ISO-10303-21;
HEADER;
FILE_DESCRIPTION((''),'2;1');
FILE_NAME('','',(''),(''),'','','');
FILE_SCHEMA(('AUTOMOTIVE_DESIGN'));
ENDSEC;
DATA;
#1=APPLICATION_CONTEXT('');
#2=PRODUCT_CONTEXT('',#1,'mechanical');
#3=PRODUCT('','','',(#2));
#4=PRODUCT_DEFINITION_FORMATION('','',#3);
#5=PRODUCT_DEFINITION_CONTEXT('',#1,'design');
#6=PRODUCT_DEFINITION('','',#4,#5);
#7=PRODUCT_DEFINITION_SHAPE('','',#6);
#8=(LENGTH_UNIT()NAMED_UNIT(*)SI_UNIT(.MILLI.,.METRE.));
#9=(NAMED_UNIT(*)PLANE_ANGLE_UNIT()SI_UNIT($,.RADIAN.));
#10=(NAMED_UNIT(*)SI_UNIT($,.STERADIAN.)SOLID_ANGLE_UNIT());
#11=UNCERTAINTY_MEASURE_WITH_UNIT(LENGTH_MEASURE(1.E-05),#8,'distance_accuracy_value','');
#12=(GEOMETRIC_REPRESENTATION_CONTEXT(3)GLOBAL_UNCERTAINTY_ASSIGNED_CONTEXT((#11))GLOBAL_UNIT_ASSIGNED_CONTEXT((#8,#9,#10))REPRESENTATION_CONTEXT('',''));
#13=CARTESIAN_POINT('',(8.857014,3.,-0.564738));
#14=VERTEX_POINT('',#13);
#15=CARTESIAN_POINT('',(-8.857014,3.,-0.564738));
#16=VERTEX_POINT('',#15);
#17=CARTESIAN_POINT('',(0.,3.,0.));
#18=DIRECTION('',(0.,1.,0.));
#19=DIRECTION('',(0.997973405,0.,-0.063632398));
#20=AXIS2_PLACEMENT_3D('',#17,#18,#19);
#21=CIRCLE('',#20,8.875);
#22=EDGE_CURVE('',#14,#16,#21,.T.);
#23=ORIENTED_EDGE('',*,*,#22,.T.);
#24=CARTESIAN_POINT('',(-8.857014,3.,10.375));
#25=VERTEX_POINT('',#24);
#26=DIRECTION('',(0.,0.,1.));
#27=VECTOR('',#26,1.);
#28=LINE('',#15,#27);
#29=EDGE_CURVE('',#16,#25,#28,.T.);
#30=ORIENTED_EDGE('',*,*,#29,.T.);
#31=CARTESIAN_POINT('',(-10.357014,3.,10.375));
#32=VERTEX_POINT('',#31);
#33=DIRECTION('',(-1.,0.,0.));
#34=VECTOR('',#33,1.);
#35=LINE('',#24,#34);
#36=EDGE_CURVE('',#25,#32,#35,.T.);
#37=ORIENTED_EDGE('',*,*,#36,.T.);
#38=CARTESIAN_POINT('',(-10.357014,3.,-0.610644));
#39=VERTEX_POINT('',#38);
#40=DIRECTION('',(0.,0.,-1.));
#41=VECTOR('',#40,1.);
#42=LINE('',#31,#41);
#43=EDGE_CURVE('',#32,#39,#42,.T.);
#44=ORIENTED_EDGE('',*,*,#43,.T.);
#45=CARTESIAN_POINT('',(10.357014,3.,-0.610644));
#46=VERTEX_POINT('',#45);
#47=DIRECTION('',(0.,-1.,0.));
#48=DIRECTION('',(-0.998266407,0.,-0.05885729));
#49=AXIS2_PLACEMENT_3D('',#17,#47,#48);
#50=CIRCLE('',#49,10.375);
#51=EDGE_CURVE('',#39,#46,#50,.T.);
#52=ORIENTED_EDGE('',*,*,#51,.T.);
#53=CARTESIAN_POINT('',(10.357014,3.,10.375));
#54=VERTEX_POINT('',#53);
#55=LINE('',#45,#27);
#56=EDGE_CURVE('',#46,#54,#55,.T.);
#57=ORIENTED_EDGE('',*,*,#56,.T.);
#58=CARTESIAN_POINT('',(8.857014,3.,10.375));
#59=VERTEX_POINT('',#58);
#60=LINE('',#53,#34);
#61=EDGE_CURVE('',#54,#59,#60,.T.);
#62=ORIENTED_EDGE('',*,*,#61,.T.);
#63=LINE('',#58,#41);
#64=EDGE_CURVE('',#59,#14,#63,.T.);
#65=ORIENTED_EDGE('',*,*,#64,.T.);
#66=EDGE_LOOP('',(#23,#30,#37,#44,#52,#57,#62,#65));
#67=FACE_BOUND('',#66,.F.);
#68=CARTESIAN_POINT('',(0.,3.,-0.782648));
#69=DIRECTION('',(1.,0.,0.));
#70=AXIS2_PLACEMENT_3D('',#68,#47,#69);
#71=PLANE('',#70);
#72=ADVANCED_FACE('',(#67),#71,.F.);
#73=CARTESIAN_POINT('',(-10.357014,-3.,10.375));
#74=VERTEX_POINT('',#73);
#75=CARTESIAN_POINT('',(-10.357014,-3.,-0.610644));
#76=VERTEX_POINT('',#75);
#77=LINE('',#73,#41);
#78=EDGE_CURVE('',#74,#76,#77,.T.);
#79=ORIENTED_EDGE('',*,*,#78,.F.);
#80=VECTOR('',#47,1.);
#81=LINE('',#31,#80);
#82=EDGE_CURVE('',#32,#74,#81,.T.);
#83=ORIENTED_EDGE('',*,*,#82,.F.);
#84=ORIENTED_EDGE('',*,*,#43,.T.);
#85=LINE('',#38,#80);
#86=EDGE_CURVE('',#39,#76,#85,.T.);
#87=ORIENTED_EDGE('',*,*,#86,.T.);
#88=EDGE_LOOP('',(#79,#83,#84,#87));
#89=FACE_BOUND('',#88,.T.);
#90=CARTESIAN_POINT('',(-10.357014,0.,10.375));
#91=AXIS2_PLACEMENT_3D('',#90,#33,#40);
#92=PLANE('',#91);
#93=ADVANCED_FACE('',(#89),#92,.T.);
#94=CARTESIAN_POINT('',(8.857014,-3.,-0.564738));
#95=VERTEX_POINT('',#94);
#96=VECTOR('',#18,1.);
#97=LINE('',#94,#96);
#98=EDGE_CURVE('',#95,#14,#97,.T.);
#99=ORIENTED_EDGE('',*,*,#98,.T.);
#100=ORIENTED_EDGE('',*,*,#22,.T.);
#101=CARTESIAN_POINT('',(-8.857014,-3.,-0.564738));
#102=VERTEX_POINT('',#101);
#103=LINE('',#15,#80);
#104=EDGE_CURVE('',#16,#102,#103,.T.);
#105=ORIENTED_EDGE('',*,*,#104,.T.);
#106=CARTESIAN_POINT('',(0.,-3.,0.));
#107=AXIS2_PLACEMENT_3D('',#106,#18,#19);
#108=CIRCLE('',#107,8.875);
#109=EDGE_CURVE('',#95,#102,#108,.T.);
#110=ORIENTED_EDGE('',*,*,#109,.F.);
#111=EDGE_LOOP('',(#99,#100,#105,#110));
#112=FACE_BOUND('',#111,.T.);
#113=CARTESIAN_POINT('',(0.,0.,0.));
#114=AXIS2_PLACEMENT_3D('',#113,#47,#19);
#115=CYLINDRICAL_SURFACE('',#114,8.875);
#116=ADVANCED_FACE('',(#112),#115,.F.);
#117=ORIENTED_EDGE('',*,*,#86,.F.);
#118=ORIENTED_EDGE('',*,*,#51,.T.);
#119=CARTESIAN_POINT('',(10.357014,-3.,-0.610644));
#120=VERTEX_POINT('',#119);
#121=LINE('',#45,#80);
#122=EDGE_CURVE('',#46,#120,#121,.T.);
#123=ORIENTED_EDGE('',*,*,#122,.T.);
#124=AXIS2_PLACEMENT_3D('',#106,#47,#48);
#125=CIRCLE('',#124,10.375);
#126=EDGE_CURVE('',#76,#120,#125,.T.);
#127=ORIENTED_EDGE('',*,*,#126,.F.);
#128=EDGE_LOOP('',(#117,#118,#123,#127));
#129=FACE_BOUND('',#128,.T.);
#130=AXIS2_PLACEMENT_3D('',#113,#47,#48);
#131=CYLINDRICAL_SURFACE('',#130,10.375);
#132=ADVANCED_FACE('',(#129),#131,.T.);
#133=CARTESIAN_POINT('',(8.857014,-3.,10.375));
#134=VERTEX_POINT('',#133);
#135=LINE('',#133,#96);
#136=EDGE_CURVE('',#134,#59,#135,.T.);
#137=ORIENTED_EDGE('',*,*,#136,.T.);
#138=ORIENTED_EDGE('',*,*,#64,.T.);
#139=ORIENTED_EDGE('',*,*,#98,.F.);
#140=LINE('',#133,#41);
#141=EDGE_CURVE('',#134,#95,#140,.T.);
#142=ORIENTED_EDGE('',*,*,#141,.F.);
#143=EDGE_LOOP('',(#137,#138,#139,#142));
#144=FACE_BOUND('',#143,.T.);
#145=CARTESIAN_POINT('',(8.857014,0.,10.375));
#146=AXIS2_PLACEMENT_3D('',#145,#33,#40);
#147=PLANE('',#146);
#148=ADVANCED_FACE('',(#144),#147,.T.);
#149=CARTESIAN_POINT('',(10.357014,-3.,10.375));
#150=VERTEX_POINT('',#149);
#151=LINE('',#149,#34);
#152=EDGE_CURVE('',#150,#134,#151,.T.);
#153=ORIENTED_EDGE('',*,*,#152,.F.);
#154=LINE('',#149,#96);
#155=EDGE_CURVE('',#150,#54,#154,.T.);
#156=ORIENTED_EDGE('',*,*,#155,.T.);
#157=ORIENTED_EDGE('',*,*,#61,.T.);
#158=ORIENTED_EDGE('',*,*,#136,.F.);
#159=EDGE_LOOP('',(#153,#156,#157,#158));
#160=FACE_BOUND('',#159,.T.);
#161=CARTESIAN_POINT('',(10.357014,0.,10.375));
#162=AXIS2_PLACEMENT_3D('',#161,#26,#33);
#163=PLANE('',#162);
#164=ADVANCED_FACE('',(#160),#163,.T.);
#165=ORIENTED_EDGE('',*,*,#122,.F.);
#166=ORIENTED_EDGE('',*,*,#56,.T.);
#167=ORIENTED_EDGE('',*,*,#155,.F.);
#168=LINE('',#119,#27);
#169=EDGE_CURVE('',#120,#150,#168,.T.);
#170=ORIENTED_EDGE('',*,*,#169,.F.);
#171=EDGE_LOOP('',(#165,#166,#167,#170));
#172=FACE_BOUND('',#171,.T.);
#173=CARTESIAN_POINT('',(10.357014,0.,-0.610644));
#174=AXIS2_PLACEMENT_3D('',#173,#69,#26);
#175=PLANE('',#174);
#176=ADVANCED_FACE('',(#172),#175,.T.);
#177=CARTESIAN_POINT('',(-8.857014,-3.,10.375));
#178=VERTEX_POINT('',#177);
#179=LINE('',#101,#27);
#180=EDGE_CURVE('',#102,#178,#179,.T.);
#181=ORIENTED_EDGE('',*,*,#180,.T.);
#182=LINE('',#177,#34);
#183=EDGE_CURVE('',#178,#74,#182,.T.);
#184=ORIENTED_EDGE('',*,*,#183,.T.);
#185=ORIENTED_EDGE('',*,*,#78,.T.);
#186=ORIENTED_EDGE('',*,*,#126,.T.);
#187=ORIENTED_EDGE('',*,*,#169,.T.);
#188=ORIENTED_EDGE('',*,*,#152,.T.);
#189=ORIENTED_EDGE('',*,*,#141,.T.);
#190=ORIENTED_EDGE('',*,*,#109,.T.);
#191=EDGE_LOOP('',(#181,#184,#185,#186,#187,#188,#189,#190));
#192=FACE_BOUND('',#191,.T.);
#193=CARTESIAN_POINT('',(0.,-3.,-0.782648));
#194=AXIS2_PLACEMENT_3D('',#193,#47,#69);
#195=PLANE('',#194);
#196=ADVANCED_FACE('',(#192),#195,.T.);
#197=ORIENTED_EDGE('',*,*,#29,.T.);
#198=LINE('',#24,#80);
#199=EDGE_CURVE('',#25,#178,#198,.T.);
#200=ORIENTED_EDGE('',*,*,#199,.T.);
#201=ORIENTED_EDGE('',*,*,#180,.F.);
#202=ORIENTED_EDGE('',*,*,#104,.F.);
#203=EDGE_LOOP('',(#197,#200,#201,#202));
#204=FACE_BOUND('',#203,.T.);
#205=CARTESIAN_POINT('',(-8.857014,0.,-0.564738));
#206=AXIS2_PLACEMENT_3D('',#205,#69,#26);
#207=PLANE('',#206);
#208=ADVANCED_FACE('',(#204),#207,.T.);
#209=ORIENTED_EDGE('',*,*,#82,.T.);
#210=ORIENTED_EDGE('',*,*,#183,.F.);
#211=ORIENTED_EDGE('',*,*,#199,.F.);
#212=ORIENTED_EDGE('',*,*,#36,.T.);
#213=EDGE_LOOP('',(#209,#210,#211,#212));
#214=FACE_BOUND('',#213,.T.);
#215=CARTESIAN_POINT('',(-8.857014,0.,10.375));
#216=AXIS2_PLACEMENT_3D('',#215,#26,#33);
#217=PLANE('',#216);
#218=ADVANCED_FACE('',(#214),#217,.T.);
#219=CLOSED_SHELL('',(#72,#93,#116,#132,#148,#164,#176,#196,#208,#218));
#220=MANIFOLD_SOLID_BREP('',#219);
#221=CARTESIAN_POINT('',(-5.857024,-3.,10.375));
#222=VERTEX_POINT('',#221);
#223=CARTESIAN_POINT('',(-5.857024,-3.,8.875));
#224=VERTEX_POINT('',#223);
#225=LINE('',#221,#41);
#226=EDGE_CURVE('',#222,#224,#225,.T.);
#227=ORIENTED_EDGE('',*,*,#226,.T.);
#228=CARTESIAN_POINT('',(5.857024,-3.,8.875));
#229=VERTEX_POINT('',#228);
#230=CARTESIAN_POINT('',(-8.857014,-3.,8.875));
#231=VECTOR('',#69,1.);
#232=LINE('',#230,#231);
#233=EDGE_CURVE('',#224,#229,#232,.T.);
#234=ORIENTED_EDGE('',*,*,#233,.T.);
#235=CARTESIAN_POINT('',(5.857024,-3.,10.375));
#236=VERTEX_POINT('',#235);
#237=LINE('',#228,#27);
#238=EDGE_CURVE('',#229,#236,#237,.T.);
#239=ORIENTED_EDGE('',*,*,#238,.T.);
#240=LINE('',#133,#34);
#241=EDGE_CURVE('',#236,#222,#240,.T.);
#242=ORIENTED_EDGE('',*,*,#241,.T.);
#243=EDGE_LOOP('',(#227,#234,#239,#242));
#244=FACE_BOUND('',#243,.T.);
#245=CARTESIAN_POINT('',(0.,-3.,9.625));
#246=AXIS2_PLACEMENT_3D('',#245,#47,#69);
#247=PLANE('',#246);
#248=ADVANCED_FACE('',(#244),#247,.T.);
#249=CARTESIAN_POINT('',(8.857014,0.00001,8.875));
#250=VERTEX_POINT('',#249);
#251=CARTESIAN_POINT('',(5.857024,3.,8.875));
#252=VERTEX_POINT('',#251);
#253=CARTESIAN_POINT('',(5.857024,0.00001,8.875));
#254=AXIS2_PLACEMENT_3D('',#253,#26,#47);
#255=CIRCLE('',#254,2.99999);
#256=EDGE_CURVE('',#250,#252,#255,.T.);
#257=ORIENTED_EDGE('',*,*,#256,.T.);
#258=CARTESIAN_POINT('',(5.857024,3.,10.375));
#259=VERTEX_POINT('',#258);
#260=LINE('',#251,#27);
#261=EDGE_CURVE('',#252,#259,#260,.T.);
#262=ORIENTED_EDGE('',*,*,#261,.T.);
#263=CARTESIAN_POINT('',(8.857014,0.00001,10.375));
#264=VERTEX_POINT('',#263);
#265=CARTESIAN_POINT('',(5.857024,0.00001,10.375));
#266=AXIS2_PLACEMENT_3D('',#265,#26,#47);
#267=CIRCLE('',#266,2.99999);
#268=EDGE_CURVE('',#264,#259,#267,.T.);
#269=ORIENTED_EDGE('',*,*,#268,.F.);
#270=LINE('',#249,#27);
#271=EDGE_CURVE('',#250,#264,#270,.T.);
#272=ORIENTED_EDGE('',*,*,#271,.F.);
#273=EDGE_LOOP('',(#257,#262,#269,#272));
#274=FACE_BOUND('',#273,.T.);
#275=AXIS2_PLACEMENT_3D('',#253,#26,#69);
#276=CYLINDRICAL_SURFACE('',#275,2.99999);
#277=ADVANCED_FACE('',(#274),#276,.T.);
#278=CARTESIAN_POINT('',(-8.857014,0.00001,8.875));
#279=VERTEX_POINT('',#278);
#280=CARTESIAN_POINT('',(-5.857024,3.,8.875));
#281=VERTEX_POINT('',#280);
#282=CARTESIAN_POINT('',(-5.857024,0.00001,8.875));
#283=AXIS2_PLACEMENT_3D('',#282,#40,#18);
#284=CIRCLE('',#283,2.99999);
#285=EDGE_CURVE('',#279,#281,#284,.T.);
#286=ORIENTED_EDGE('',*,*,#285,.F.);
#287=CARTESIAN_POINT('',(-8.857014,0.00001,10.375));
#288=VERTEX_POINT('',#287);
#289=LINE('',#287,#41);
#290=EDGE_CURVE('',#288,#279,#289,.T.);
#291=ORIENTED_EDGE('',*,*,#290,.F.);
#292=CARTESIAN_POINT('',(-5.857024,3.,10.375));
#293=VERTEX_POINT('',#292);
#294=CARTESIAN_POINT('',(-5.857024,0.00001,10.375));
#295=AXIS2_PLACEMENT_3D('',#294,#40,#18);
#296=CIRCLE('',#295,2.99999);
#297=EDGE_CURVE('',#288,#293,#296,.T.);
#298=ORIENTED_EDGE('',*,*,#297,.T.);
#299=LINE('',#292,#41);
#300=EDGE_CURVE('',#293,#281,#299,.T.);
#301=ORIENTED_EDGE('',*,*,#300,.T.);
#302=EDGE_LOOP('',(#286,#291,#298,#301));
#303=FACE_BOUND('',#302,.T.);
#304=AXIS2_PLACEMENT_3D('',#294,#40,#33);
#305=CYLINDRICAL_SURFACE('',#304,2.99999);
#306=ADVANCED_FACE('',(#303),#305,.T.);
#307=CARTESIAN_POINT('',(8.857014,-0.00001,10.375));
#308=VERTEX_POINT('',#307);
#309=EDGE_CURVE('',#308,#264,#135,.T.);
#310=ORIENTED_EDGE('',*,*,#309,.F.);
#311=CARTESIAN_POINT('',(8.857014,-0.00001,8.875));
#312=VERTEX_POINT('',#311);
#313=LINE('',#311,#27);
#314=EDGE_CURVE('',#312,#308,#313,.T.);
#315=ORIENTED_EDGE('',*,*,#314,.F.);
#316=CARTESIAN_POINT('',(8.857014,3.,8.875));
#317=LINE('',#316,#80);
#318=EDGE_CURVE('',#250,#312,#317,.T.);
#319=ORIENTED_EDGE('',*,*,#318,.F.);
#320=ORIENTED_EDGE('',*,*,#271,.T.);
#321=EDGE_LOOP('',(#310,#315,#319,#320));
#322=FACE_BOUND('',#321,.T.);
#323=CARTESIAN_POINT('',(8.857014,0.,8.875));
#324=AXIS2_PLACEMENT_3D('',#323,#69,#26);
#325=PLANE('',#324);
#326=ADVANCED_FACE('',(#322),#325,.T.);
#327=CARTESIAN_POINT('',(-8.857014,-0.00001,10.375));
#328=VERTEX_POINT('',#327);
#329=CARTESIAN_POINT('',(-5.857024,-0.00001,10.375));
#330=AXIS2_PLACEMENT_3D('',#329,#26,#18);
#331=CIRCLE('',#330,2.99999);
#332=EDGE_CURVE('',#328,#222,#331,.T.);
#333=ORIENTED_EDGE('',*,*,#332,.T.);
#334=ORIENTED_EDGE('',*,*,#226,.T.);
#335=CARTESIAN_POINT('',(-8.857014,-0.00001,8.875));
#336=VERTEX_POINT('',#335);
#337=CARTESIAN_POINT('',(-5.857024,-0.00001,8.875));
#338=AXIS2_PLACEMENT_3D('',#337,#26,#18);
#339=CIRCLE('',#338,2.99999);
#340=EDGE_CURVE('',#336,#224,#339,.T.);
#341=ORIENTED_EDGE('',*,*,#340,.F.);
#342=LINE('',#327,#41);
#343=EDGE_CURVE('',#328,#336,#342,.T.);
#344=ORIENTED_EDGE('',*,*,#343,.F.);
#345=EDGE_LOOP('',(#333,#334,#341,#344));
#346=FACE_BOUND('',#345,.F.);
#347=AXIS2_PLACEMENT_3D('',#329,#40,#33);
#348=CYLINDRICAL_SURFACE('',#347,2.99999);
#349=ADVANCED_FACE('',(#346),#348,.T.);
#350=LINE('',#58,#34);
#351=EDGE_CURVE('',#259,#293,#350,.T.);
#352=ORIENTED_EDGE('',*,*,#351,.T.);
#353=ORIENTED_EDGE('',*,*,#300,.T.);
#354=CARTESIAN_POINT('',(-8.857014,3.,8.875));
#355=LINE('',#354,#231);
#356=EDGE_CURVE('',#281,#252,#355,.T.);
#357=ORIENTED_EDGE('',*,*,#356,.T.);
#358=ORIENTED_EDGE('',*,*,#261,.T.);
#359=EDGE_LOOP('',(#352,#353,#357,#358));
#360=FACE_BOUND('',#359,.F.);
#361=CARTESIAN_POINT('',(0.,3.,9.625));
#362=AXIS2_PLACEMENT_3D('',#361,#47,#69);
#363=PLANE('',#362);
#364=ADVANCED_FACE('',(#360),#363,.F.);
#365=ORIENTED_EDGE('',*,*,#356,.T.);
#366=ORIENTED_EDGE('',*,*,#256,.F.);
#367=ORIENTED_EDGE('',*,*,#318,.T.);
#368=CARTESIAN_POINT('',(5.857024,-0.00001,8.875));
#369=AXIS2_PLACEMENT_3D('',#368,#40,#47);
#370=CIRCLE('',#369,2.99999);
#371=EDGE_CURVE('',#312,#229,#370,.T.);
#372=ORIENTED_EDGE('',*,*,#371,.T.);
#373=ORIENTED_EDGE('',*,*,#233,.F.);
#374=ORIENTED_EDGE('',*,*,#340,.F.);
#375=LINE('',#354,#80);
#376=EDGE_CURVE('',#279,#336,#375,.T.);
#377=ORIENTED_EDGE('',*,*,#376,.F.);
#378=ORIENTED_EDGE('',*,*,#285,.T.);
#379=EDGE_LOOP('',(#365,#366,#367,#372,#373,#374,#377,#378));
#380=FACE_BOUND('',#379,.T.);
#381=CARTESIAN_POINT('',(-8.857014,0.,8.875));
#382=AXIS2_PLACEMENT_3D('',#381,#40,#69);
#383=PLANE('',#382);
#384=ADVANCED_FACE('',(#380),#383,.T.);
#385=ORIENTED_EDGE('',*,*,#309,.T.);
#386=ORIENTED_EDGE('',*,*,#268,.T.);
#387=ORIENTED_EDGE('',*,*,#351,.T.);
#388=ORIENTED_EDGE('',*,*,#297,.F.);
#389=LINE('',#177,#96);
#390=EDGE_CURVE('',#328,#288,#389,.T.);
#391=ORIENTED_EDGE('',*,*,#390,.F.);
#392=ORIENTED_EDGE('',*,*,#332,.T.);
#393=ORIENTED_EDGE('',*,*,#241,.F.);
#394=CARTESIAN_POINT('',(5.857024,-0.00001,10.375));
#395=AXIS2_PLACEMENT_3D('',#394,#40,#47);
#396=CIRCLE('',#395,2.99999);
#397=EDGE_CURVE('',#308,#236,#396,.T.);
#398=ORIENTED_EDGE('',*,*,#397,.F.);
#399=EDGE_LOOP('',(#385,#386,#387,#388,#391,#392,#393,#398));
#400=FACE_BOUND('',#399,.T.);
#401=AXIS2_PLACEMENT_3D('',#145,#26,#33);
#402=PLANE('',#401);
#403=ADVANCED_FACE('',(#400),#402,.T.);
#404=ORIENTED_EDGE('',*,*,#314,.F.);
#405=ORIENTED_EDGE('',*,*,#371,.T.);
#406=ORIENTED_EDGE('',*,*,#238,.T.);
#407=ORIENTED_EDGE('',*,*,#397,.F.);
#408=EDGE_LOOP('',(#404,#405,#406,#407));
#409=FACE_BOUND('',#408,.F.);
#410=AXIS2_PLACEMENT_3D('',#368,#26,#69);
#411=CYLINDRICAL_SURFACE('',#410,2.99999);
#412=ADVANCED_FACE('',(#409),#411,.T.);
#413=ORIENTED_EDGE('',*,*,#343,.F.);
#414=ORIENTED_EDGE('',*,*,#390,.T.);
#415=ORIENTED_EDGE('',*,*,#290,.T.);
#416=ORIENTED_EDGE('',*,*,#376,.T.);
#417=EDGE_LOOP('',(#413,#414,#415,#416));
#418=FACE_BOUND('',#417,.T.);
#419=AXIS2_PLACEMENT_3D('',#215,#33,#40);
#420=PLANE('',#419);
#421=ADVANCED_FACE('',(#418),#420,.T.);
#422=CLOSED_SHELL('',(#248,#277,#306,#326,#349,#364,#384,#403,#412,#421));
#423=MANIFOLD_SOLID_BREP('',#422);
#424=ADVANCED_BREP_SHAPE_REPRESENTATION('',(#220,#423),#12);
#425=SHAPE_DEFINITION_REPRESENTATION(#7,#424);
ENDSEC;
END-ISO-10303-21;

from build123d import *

# Parameters (mm, degrees)
F1_DEPTH      = 3
F1_DEPTH_BACK = 3
F2_DEPTH      = 3
F2_DEPTH_BACK = 3
F3_R          = 2.99999


# Not quite as in the source:
# - a fillet or chamfer is up to 0.001 mm smaller than in the source, because OpenCascade refuses the exact size


with BuildPart() as f1:
    # F0 (on Front) → F1 (new body, two sides)
    with BuildSketch(Plane.XZ) as f1_sk:
        with BuildLine():
            ThreePointArc((8.8570139732, -0.5647375303), (0, -8.875), (-8.8570139732, -0.5647375303))
            Line((-8.8570139732, -0.5647375303), (-8.8570139732, 8.875))
            Line((-8.8570139732, 8.875), (-8.8570139732, 10.375))
            Line((-8.8570139732, 10.375), (-10.3570139732, 10.375))
            Line((-10.3570139732, 10.375), (-10.3570139732, 8.875))
            Line((-10.3570139732, 8.875), (-10.3570139732, -0.6106443797))
            ThreePointArc((-10.3570139732, -0.6106443797), (0, -10.375), (10.3570139732, -0.6106443797))
            Line((10.3570139732, -0.6106443797), (10.3570139732, 8.875))
            Line((10.3570139732, 8.875), (10.3570139732, 10.375))
            Line((10.3570139732, 10.375), (8.8570139732, 10.375))
            Line((8.8570139732, 10.375), (8.8570139732, 8.875))
            Line((8.8570139732, 8.875), (8.8570139732, -0.5647375303))
        make_face()
    extrude(amount=F1_DEPTH)
    extrude(f1_sk.sketch, amount=-F1_DEPTH_BACK)


with BuildPart() as f2:
    # F0 (on Front) → F2 (new body, two sides)
    with BuildSketch(Plane.XZ) as f2_sk:
        Polygon((-8.8570139732, 10.375), (-8.8570139732, 8.875), (-0.6155143709, 8.875), (0.6154856291, 8.875), (8.8570139732, 8.875), (8.8570139732, 10.375), align=None)
    extrude(amount=F2_DEPTH)
    extrude(f2_sk.sketch, amount=-F2_DEPTH_BACK)

    # F3 (radius 3 in the source; OpenCascade refuses exactly that, so slightly less here)
    f3_edges = [f2.edges().sort_by_distance(p)[0] for p in [
        (-8.857014, -3, 9.625),
        (-8.857014, 3, 9.625),
        (8.857014, -3, 9.625),
        (8.857014, 3, 9.625),
    ]]
    fillet(f3_edges, radius=F3_R)


solid = Compound([f1.part, f2.part])
